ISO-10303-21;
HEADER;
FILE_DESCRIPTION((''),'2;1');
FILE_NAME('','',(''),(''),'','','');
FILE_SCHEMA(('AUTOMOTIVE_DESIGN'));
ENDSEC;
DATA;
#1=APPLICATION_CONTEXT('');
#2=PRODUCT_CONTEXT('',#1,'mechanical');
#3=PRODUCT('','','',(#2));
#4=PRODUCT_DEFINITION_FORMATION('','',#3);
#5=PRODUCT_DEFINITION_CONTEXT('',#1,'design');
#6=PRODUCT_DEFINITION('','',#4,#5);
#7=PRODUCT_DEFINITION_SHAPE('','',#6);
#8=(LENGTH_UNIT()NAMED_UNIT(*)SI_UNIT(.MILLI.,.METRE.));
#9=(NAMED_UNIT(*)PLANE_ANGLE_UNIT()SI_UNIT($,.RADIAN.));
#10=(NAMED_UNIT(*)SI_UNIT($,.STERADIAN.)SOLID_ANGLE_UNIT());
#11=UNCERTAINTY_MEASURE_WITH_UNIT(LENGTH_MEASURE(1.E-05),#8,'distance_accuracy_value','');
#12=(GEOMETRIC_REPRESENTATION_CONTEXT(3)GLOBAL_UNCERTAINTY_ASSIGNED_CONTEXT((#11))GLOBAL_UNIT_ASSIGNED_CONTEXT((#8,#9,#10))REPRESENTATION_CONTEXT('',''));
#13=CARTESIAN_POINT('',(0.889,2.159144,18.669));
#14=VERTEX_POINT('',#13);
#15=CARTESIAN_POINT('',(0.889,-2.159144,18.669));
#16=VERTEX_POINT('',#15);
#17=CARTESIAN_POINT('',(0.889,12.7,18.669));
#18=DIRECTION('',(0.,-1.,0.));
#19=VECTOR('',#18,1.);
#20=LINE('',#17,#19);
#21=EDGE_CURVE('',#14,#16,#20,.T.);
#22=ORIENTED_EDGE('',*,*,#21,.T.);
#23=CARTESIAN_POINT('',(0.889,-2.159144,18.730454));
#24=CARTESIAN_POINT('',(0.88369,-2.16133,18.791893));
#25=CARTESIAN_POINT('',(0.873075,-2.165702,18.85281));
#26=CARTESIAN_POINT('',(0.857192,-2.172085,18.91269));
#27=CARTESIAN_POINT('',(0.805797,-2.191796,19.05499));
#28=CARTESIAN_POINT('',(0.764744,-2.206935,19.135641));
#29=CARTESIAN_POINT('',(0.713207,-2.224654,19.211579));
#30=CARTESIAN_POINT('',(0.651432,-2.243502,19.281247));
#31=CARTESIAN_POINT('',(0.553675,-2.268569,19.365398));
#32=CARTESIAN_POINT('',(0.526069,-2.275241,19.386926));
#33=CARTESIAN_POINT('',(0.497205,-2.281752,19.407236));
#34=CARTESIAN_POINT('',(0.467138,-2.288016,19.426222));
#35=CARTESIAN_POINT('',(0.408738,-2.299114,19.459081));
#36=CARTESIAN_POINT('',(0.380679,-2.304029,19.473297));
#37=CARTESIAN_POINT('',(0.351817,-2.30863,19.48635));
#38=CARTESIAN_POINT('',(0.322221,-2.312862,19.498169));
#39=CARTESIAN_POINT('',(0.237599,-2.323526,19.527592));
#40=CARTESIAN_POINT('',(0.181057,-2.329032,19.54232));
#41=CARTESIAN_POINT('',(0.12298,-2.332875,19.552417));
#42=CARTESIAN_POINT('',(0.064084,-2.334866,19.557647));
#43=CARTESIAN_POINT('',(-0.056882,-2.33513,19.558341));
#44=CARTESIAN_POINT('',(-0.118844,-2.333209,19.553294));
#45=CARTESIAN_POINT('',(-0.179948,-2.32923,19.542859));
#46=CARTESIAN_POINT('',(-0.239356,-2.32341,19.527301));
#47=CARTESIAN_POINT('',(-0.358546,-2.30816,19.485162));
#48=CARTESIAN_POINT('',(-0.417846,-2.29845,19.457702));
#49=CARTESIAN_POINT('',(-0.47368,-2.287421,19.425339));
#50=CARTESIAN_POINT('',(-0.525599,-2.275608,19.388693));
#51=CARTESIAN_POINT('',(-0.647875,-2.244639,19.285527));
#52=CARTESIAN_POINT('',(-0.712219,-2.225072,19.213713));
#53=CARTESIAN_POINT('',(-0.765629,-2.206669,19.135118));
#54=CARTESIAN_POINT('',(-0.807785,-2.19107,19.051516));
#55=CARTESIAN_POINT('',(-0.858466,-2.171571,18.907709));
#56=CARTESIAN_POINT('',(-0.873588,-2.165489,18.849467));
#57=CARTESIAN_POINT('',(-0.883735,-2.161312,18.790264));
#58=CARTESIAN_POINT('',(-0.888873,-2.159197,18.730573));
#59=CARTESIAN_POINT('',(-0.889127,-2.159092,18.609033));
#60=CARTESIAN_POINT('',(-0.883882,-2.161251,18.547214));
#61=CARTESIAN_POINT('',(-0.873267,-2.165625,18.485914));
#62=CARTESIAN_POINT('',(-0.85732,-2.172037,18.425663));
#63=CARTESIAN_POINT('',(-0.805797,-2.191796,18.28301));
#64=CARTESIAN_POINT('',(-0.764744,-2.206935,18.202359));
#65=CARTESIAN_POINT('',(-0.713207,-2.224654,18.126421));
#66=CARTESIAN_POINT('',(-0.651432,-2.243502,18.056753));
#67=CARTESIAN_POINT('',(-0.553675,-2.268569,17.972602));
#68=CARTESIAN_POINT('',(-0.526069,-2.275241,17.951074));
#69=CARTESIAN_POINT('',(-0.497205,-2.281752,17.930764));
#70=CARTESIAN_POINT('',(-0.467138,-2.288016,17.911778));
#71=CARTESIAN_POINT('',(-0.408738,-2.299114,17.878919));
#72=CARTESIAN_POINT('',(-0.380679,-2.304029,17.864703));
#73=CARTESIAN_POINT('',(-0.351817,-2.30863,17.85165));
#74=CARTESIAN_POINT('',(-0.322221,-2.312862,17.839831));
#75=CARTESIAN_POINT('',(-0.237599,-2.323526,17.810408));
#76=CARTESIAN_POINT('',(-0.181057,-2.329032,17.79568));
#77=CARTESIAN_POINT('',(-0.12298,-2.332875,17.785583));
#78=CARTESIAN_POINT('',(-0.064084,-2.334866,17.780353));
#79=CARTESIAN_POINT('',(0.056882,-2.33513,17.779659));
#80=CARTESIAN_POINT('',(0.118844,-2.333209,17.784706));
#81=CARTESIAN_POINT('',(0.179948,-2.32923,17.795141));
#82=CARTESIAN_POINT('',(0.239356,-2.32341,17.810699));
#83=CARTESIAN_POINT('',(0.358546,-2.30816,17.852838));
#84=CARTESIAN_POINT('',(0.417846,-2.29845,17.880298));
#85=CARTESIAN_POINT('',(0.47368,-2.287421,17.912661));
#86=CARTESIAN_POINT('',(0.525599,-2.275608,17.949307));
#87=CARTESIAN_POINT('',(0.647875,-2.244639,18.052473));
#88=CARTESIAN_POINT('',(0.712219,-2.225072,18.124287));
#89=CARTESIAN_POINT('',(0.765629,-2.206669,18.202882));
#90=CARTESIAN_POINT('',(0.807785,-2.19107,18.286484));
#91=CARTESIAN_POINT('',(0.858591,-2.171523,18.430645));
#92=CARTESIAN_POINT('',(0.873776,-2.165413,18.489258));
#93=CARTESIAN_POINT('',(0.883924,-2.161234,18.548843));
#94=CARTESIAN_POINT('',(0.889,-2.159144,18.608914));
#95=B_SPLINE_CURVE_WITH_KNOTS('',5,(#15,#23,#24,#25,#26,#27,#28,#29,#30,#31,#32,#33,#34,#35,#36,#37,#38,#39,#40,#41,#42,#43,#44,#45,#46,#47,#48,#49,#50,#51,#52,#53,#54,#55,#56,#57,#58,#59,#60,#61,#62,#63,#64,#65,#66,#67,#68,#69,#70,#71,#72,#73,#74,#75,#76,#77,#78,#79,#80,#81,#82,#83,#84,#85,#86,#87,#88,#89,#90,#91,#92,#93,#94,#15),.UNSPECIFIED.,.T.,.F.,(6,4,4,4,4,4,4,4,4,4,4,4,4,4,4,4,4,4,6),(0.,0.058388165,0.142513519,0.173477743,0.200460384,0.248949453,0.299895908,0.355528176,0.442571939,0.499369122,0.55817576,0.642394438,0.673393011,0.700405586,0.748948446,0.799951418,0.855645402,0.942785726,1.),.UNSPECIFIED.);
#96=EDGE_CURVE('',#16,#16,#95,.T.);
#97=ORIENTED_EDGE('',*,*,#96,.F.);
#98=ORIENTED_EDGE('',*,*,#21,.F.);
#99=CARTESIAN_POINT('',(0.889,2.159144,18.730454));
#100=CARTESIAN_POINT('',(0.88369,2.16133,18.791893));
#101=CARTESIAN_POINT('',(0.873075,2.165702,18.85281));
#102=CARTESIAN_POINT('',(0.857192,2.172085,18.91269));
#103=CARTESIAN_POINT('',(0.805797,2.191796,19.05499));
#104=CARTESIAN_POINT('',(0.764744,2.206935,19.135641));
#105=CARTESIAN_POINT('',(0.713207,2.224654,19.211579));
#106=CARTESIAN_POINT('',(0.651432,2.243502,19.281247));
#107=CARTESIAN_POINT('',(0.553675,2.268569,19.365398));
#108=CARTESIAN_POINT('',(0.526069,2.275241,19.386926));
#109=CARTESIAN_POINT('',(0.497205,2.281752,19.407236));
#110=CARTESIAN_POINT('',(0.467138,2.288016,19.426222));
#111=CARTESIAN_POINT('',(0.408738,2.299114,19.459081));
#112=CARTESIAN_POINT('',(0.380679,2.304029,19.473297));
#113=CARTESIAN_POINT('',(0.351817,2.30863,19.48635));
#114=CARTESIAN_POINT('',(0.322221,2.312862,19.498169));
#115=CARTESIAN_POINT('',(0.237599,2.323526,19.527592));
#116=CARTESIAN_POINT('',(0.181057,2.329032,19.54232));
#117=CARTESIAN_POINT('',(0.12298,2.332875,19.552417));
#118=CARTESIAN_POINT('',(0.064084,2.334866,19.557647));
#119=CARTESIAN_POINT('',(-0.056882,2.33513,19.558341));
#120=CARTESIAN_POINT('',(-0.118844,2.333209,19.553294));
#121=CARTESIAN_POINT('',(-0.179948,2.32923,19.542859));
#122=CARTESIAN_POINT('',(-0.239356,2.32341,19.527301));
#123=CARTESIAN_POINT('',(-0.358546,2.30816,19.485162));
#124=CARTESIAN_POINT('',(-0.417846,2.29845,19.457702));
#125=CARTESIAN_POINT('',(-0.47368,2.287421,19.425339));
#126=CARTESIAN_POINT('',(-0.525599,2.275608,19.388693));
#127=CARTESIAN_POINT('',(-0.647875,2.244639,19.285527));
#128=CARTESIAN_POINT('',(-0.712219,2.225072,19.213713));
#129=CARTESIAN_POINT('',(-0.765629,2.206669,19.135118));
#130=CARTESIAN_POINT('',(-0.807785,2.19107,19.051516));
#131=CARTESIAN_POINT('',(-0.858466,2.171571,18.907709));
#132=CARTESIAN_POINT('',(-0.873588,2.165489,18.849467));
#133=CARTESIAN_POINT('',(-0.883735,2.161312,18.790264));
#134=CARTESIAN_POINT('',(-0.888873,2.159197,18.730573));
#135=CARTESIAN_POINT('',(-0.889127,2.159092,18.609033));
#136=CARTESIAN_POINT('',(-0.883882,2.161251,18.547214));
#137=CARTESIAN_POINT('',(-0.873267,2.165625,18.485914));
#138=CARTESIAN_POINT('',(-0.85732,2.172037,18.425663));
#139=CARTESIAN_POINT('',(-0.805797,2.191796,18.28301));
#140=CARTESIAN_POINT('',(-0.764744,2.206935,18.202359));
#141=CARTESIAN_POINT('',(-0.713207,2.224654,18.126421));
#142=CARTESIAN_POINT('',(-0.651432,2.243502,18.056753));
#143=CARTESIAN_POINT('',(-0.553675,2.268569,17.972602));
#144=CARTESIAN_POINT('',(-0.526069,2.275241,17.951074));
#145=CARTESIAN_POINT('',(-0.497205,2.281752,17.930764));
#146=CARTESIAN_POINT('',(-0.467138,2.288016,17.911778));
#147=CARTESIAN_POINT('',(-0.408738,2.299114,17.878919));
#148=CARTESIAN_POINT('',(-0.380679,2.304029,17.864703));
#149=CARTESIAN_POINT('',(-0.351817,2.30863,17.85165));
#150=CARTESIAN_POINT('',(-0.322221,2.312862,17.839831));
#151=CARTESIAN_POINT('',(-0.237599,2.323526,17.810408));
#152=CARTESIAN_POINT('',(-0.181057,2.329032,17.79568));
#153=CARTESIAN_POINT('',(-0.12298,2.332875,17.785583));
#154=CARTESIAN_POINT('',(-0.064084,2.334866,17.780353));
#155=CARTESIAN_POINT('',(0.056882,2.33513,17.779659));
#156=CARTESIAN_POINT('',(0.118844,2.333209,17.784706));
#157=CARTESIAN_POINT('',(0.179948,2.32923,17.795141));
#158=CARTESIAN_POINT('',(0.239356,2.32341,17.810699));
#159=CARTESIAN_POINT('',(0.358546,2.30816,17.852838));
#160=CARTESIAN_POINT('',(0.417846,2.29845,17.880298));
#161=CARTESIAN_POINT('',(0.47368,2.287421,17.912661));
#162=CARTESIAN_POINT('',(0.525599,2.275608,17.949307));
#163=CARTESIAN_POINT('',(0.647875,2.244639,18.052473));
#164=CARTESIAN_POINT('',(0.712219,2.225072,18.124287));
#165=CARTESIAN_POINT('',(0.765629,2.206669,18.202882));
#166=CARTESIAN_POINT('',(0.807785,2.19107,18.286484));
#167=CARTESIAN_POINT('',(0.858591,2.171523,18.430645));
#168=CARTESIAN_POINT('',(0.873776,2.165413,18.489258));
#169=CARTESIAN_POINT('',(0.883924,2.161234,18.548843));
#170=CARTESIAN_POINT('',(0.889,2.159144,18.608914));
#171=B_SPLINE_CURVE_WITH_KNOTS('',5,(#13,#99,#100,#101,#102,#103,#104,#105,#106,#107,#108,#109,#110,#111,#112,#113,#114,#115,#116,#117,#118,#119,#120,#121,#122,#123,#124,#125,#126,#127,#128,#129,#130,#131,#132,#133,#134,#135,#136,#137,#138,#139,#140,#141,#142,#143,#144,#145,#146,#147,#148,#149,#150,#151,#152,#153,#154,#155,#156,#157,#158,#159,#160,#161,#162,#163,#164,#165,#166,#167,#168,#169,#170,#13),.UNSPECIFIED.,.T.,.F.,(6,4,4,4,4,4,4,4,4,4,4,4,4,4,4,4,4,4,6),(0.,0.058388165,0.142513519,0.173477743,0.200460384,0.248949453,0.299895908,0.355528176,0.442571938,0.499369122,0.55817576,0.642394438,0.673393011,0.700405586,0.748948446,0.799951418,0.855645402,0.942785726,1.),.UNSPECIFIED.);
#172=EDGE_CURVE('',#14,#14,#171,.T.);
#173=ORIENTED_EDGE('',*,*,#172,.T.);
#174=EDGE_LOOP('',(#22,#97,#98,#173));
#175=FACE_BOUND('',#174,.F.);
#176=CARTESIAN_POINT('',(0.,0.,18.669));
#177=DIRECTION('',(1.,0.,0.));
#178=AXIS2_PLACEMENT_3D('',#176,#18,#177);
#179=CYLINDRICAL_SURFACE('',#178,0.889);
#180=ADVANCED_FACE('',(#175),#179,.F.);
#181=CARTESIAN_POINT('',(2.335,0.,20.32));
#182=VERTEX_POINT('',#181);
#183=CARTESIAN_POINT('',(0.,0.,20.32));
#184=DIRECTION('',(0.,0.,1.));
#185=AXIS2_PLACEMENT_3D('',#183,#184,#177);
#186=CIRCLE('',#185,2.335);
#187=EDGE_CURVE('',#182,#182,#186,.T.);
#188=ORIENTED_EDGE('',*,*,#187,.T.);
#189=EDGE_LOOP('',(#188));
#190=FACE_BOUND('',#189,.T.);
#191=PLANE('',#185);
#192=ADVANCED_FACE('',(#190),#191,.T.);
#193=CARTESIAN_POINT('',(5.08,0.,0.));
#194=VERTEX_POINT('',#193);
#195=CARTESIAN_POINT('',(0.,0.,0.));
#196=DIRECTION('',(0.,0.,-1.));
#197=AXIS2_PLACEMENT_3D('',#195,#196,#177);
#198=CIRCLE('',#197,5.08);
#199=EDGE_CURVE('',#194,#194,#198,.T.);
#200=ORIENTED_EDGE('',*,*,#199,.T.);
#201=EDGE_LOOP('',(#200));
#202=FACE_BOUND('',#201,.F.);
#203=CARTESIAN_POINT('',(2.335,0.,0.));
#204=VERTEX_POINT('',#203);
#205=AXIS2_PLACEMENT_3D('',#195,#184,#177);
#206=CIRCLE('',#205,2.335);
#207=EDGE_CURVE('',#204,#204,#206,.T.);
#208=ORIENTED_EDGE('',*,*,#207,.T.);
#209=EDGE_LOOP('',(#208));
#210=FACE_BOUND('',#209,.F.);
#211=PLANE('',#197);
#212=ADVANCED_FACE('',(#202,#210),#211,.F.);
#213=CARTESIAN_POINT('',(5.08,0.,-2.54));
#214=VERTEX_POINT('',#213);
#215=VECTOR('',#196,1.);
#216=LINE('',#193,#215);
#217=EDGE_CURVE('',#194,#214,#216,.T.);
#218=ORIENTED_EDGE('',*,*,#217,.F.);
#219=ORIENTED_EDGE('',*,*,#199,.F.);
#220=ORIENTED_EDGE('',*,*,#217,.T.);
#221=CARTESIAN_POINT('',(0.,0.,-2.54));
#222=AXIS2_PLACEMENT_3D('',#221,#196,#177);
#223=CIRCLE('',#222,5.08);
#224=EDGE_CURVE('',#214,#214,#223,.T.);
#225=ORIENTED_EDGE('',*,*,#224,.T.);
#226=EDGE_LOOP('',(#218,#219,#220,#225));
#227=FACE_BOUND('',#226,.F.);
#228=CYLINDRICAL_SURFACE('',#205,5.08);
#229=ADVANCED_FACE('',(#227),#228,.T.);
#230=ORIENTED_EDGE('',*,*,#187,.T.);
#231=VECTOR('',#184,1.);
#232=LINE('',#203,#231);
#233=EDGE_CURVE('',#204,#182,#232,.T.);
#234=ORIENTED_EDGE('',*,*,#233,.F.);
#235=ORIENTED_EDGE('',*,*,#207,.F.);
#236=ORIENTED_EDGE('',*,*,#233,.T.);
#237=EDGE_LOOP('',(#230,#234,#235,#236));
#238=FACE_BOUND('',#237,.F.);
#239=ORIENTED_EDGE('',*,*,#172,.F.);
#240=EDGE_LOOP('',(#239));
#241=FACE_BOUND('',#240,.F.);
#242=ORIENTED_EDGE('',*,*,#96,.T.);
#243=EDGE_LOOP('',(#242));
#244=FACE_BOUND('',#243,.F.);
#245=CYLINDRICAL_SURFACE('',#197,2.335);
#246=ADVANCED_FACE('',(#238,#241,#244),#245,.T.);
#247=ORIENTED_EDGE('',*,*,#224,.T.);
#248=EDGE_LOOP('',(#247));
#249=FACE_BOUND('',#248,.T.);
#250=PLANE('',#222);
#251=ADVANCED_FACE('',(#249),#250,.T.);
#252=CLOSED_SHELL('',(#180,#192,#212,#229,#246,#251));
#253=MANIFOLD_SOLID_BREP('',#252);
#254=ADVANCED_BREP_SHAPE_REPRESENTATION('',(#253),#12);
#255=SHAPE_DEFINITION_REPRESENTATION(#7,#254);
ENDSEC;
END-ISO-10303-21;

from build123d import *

# Parameters (mm, degrees)
F0_R     = 2.335
F1_DEPTH = 20.32
F2_R     = 5.08
F2_R_2   = 2.335
F3_DEPTH = 2.54
F4_R     = 0.889
F5_DEPTH = 12.7


with BuildPart() as f1:
    # F0 (on Top) → F1 (new body)
    with BuildSketch(Plane.XY):
        Circle(F0_R)
    extrude(amount=F1_DEPTH)

    # F2 (on face) → F3 (join)
    with BuildSketch(Plane(origin=(0, 0, 0), x_dir=(1, 0, 0), z_dir=(0, 0, -1))):
        Circle(F2_R)
        Circle(F2_R_2, mode=Mode.SUBTRACT)
        Circle(F2_R_2)
    extrude(amount=F3_DEPTH)

    # F4 (on Front) → F5 (cut, symmetric)
    with BuildSketch(Plane.XZ):
        with Locations((0, 18.669)):
            Circle(F4_R)
    extrude(amount=F5_DEPTH, both=True, mode=Mode.SUBTRACT)


solid = f1.part
